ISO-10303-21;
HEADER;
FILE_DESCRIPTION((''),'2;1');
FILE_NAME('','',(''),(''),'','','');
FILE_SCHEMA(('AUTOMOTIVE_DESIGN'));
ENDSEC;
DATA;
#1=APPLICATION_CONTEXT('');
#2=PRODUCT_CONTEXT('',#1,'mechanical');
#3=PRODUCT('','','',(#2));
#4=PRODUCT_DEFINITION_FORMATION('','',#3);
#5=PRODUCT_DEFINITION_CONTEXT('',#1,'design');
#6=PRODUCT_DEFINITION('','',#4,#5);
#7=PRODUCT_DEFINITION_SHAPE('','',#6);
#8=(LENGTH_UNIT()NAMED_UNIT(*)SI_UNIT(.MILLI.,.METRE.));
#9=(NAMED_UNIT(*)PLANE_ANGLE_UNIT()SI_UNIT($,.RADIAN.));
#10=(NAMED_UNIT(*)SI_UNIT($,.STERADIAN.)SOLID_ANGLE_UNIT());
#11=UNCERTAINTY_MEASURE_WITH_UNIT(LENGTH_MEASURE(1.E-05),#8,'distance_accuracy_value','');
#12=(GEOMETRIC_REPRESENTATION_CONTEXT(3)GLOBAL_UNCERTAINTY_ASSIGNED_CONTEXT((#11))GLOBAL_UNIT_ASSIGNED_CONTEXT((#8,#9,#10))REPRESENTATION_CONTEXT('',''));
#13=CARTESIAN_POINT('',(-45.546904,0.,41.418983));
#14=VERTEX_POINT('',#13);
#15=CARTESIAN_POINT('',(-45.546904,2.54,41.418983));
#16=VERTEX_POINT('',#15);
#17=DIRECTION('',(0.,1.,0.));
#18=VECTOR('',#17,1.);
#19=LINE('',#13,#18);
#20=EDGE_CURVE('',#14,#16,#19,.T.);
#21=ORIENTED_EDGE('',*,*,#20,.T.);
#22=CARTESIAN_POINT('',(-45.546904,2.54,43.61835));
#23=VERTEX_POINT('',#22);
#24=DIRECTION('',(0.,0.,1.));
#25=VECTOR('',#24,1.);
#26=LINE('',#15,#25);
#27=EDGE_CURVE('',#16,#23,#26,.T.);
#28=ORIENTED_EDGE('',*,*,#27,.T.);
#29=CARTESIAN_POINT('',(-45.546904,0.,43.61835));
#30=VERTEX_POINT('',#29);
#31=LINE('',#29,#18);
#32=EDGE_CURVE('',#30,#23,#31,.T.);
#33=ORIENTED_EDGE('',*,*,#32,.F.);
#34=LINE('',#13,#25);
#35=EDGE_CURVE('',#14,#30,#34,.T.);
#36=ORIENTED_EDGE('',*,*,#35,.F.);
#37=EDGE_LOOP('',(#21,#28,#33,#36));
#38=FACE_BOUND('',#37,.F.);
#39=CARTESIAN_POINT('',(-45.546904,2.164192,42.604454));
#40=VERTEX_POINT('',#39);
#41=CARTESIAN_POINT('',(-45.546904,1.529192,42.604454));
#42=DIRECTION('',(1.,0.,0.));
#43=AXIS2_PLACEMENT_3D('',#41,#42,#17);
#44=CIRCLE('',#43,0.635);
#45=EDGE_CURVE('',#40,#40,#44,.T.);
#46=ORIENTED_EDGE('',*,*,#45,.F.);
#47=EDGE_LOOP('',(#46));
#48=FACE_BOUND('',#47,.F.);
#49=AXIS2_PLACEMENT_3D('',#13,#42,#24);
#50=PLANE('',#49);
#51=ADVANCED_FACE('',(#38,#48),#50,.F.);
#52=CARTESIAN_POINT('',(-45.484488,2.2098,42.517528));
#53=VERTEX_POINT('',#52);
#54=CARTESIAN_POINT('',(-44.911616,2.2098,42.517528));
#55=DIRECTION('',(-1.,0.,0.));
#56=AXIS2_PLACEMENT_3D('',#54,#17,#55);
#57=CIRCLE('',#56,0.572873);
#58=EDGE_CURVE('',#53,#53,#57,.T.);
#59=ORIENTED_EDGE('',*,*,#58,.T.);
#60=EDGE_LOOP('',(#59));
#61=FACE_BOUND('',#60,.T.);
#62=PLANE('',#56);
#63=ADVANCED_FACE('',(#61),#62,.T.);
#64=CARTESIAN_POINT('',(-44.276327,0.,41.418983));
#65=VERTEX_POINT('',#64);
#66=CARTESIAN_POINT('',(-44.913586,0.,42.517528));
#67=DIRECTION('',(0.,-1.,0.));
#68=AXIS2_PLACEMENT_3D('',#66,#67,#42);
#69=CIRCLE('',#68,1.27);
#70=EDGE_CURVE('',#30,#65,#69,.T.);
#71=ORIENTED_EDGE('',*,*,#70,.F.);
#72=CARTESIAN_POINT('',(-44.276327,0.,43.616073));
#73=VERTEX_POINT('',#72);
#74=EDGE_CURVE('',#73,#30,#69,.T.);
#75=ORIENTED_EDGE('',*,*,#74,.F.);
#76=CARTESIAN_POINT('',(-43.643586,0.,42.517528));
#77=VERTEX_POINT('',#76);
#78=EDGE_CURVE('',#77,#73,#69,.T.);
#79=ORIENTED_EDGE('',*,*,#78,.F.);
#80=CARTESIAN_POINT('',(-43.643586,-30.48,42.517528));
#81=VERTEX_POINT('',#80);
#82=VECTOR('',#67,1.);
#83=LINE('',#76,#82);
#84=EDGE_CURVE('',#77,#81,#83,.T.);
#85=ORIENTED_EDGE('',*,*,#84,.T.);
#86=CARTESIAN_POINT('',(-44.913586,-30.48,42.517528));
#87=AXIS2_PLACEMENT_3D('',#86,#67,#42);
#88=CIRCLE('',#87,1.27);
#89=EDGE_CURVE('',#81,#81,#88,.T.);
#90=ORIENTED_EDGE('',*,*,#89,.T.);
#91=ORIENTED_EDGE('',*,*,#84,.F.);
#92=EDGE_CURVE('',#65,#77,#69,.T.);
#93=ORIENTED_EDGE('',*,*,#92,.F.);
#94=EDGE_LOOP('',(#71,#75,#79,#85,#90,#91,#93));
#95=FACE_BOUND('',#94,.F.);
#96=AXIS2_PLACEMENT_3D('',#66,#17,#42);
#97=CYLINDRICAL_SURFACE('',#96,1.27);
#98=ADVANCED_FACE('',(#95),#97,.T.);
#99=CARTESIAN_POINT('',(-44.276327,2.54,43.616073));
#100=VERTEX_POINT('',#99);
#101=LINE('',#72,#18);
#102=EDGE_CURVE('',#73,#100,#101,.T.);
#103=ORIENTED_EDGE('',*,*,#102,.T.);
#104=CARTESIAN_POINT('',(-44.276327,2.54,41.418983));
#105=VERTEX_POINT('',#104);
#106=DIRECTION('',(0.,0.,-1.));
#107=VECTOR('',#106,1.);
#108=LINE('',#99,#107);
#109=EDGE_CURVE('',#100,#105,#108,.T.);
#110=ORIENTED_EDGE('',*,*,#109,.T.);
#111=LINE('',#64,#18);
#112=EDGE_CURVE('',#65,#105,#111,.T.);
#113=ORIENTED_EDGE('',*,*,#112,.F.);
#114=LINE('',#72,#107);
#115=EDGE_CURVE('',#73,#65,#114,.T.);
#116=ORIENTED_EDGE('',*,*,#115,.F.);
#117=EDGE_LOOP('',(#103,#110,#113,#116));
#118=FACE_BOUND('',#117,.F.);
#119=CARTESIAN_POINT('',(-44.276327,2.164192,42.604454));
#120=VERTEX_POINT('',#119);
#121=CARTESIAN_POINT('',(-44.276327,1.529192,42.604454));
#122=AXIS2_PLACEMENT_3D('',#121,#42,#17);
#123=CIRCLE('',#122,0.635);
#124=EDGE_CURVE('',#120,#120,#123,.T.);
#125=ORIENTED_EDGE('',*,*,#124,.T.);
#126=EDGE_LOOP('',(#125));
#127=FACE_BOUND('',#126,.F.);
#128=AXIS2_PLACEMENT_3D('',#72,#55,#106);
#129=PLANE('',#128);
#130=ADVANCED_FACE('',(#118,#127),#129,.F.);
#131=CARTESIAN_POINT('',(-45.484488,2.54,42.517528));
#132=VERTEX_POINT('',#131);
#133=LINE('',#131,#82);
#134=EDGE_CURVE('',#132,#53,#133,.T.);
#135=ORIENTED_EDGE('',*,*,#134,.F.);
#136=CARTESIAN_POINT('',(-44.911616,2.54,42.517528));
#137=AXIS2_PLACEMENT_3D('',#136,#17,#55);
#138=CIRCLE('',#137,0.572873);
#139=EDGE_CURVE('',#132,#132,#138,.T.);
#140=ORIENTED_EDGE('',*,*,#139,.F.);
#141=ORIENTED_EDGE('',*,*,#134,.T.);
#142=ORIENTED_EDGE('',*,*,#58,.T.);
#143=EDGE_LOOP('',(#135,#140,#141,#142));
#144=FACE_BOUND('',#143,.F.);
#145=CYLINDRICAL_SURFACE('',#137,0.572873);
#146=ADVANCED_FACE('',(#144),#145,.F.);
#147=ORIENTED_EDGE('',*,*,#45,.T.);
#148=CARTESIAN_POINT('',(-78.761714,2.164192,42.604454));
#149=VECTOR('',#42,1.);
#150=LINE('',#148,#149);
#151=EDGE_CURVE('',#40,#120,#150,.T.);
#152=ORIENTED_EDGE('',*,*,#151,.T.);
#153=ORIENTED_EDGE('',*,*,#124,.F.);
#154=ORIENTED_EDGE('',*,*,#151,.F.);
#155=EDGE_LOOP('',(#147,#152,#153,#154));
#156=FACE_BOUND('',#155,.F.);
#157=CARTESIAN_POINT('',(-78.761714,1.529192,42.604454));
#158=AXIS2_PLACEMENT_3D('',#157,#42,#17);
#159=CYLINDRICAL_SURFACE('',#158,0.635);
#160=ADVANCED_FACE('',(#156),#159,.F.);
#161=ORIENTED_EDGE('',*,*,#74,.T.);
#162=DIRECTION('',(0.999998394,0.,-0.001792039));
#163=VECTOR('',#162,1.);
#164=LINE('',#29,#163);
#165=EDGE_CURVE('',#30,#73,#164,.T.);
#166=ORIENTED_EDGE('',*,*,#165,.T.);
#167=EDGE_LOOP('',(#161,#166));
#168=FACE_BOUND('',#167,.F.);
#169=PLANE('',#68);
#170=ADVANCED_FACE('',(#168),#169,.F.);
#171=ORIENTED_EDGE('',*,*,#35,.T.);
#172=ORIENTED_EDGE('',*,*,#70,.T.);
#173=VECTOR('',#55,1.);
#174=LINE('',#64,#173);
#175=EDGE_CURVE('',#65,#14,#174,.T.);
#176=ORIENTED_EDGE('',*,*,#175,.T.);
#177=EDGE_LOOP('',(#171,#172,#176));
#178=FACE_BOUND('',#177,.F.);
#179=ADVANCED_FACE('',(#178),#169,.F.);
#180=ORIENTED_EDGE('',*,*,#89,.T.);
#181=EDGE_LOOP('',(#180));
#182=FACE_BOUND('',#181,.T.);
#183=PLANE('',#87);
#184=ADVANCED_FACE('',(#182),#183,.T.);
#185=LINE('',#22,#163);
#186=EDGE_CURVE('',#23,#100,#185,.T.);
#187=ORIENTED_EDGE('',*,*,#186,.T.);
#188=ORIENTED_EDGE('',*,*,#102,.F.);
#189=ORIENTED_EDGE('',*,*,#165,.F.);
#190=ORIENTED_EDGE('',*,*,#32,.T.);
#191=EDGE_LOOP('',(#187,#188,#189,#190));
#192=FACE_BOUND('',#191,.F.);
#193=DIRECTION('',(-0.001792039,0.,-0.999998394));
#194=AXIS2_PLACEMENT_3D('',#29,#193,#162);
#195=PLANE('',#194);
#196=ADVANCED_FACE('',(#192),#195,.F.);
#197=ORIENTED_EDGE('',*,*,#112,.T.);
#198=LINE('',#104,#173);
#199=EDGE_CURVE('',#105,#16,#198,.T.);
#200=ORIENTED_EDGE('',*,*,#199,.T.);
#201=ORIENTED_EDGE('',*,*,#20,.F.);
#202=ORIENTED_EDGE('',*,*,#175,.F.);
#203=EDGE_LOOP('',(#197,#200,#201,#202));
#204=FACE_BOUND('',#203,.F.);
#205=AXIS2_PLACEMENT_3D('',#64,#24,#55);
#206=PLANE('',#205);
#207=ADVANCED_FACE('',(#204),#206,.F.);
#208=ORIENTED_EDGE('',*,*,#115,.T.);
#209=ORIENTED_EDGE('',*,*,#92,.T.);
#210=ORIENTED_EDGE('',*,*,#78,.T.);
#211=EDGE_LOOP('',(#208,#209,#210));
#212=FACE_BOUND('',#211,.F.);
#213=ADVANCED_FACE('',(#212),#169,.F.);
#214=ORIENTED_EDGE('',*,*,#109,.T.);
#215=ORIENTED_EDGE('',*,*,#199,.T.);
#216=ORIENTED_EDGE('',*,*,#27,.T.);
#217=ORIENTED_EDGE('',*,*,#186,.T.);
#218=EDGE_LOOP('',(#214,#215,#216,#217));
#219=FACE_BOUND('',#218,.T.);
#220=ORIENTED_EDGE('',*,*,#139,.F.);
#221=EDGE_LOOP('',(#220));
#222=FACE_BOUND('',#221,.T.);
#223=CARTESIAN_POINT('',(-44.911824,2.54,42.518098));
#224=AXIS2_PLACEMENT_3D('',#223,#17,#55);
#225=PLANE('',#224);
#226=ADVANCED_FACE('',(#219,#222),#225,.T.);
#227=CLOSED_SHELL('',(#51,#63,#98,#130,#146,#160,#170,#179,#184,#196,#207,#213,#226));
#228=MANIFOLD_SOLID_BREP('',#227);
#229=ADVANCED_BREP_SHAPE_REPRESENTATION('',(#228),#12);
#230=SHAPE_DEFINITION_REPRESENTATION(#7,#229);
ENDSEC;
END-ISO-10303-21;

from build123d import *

# Parameters (mm, degrees)
F0_R     = 1.27
F1_DEPTH = 30.48
F3_DEPTH = 2.54
F5_D     = 1.27
F6_R     = 0.5728725826
F7_DEPTH = 0.3302


# Not quite as in the source:
# - a feature names something its author has since deleted; it is built from what else it names


with BuildPart() as f1:
    # F0 (on Front) → F1 (new body)
    with BuildSketch(Plane.XZ):
        with Locations((-44.9135862291, 42.5175279379)):
            Circle(F0_R)
    extrude(amount=F1_DEPTH)

    # F2 (on face) → F3 (join)
    with BuildSketch(Plane(origin=(0, 0, 0), x_dir=(-1, 0, 0), z_dir=(0, 1, 0))):
        Polygon((44.2763268948, 43.6160726756), (44.2763268948, 42.5175279379), (44.2763268948, 41.4189832001), (45.5469042063, 41.4189832001), (45.5469042063, 43.6183496036), align=None)
    extrude(amount=F3_DEPTH)

    # F5 (through all)
    with Locations(Plane(origin=(-45.5469042063, 0, 0), x_dir=(0, -1, 0), z_dir=(-1, 0, 0))):
        with Locations((-1.5291915042, 42.6044538617)):
            Hole(F5_D / 2)

    # F6 (on face) → F7 (cut)
    with BuildSketch(Plane(origin=(0, 2.54, 0), x_dir=(-1, 0, 0), z_dir=(0, 1, 0))):
        with Locations((44.9116155505, 42.5175279379)):
            Circle(F6_R)
    extrude(amount=-F7_DEPTH, mode=Mode.SUBTRACT)


solid = f1.part
